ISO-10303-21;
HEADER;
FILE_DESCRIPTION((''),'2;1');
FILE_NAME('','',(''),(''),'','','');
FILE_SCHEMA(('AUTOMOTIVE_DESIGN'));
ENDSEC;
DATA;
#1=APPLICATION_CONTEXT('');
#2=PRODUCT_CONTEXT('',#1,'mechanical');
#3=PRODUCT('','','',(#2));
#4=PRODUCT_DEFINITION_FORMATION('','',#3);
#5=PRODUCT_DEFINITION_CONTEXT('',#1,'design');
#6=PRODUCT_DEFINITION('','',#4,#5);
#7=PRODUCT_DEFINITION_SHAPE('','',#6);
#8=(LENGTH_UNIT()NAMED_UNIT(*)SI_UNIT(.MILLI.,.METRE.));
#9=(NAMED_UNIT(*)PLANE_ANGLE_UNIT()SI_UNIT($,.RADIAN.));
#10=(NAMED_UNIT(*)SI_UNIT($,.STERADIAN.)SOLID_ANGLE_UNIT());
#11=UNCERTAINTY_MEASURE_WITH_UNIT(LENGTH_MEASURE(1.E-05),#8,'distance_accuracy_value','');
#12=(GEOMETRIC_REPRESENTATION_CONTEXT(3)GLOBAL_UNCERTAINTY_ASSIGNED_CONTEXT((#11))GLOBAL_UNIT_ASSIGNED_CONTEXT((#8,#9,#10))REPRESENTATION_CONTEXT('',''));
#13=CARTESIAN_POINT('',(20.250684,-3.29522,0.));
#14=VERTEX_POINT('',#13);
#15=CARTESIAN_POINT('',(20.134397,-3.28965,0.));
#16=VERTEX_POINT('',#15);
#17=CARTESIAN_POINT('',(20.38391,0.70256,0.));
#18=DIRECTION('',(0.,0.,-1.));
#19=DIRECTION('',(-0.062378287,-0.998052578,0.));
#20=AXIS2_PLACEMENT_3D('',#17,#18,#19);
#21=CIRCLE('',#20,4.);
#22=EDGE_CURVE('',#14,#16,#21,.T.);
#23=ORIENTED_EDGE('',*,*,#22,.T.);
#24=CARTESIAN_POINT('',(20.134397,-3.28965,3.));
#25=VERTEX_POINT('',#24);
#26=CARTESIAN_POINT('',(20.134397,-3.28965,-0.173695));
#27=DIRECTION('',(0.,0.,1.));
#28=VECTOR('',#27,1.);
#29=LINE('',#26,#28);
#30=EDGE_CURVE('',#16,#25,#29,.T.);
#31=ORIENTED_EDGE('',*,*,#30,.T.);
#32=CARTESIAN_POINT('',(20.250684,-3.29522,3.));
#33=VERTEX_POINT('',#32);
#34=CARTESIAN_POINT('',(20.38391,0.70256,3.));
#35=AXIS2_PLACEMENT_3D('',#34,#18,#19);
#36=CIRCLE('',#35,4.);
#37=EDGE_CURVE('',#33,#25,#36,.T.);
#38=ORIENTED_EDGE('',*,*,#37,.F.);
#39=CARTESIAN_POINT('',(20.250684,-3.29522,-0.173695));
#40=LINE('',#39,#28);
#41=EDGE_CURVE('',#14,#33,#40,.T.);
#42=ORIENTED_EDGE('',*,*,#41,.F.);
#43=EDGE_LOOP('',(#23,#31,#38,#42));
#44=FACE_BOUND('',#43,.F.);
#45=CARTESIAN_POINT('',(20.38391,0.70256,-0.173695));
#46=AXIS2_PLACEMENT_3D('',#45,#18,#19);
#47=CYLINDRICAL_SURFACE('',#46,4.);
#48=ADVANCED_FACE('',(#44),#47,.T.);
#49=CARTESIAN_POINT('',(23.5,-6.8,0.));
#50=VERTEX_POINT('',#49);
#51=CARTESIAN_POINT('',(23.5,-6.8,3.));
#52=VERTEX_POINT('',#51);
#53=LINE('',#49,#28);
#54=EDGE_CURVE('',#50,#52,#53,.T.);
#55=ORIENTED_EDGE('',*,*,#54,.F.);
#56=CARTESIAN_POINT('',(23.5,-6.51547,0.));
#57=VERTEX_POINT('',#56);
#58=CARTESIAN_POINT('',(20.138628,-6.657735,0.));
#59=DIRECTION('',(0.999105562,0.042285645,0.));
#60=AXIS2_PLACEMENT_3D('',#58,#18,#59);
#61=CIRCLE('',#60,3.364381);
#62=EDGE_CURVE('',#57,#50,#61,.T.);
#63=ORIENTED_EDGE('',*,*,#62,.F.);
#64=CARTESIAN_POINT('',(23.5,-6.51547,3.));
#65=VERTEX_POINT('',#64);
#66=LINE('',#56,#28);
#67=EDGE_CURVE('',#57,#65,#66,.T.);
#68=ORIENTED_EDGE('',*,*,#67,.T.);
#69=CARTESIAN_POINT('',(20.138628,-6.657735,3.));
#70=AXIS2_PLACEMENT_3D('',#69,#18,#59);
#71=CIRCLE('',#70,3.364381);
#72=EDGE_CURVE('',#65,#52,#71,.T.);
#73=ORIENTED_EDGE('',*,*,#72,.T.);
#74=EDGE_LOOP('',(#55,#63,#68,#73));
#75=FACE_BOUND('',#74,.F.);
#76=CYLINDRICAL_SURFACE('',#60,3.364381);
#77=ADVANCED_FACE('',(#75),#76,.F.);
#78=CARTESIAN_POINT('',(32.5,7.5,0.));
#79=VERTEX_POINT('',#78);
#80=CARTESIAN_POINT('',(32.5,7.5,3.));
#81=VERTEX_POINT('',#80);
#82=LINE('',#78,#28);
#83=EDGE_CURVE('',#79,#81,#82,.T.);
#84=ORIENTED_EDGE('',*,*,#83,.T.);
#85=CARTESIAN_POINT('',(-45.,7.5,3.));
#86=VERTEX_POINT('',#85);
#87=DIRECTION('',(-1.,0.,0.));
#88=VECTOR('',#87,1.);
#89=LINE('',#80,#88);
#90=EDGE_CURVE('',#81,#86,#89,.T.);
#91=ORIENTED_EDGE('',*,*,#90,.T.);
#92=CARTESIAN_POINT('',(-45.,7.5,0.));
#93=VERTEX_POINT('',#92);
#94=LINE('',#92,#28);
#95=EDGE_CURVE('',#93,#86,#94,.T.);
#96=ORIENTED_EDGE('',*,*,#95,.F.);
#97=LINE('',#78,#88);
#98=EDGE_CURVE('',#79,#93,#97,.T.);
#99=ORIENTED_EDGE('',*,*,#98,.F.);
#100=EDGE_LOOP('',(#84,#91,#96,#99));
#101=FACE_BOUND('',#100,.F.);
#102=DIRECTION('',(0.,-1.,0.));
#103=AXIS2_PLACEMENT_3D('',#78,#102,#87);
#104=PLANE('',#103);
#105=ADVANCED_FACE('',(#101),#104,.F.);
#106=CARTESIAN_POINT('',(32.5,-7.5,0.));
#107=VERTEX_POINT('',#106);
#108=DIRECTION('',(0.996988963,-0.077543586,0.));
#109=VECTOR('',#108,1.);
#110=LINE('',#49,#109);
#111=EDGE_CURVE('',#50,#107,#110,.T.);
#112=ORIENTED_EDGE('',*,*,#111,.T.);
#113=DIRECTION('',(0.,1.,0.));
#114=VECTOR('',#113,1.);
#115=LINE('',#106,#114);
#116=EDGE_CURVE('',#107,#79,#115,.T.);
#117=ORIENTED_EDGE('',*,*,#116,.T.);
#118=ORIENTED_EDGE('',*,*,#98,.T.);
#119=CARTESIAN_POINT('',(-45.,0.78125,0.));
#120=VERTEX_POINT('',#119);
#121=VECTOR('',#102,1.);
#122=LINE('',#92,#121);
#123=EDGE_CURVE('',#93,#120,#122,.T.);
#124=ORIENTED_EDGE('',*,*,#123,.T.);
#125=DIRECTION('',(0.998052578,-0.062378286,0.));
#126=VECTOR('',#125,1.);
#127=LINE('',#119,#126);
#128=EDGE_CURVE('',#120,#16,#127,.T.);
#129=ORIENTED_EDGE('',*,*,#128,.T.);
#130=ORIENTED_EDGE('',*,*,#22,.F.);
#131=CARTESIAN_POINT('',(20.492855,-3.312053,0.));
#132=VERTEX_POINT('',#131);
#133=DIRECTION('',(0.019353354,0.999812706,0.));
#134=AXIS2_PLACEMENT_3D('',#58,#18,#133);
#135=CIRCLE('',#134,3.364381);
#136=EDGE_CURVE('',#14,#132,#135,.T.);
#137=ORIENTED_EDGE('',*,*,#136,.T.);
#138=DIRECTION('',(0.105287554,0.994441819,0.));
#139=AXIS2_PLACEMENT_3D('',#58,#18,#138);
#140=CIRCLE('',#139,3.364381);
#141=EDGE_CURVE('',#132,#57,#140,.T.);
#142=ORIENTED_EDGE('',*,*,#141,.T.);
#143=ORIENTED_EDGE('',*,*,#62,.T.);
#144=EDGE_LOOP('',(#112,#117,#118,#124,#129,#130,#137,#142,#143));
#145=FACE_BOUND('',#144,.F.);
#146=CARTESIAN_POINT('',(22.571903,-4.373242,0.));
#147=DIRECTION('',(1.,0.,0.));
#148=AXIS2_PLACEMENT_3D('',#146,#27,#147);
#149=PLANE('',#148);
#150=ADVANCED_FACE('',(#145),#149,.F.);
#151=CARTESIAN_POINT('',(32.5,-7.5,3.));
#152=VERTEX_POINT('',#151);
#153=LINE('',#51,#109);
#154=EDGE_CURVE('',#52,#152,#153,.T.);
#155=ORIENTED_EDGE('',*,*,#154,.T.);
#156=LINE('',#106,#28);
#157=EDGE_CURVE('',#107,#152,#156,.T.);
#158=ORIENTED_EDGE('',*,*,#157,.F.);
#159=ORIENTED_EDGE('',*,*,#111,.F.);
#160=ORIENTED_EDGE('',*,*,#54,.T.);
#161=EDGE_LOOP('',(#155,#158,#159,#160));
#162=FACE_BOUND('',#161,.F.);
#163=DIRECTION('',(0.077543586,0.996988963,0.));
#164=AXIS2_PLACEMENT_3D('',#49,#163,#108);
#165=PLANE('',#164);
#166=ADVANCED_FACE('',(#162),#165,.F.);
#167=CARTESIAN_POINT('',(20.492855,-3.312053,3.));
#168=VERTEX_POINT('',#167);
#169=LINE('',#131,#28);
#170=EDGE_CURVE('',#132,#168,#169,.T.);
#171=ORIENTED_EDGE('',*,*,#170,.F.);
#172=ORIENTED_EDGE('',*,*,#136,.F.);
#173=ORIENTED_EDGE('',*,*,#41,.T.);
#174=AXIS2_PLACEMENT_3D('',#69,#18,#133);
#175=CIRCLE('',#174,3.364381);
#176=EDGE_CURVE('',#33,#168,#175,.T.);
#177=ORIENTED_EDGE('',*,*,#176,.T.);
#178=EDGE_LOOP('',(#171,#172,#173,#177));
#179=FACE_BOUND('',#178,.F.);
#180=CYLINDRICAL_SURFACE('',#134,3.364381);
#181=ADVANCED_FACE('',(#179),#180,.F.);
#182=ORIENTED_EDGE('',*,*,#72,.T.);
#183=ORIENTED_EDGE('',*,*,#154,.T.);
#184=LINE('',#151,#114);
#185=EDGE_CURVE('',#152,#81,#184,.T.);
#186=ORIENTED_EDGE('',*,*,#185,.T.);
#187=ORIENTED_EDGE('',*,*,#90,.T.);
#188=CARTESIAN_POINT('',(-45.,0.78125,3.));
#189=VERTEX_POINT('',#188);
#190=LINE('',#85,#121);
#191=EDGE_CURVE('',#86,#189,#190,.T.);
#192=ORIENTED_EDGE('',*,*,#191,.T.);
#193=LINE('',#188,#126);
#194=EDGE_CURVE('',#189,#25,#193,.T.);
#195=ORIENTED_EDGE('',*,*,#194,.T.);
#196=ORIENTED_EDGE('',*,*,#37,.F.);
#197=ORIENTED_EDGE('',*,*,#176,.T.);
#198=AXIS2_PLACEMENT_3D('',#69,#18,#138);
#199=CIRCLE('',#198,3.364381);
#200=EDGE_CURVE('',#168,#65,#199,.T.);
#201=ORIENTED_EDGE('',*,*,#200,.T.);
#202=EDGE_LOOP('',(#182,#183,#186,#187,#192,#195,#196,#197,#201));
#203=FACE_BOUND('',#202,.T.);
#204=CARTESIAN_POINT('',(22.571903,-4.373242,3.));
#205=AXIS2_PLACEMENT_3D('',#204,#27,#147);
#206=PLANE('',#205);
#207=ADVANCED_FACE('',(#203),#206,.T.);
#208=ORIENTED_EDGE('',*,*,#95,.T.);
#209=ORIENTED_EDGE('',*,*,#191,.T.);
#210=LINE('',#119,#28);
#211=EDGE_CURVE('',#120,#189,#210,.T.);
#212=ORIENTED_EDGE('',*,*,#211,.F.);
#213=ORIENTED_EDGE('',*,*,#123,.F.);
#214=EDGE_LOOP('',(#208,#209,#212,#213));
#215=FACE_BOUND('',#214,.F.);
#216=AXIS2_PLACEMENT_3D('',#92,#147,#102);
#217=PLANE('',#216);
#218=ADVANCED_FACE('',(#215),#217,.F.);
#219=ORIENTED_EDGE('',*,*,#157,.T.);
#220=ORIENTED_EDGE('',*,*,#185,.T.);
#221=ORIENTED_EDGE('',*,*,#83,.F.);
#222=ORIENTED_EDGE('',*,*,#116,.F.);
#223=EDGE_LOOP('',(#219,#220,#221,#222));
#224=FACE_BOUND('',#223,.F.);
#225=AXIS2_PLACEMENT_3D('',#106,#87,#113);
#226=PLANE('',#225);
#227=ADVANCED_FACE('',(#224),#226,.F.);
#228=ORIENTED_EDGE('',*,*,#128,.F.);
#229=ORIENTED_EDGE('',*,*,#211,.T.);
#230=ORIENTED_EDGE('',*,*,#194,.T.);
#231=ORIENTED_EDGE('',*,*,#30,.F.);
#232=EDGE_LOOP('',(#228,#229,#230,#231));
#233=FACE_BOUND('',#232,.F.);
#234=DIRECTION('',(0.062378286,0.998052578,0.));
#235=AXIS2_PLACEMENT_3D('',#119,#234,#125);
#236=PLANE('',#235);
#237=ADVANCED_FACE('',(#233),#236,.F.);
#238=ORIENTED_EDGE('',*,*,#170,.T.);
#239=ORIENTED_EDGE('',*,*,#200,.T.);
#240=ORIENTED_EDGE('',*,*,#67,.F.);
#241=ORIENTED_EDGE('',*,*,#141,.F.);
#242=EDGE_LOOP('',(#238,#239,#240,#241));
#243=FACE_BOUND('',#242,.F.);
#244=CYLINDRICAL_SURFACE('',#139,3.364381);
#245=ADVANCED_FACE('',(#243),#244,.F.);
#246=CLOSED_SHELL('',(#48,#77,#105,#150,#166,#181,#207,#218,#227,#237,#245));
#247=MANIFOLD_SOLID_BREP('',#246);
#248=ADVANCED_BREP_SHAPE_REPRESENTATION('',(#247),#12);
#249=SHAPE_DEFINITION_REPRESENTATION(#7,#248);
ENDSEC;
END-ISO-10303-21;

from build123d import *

# Parameters (mm, degrees)
F2_DEPTH    = 3
F3_T1_DEPTH = 3.3473896723


# Not quite as in the source:
# - a fillet or chamfer that OpenCascade refuses, or shapes differently, is made with other operations: its cross-section is extruded or revolved along the edge and cut away or added


with BuildPart() as f2:
    # F1 (on face) → F2 (new body)
    with BuildSketch(Plane.XY):
        with BuildLine():
            Line((23.5, -3.5), (20.4928553643, -3.3120534603))
            ThreePointArc((20.4928553643, -3.3120534603), (22.5915627309, -4.3550902955), (23.5, -6.5154699331))
            Line((23.5, -6.5154699331), (23.5, -3.5))
        make_face()
        with BuildLine():
            Line((-32.5, 7.5), (-32.5, 0))
            Line((-32.5, 0), (20.2037399466, -3.2939837467))
            ThreePointArc((20.2037399466, -3.2939837467), (20.3484922252, -3.2999054879), (20.4928553643, -3.3120534603))
            Line((20.4928553643, -3.3120534603), (23.5, -3.5))
            Line((23.5, -3.5), (23.5, -6.5154699331))
            ThreePointArc((23.5, -6.5154699331), (23.5030092301, -6.6577349666), (23.5, -6.8))
            Line((23.5, -6.8), (32.5, -7.5))
            Line((32.5, -7.5), (32.5, 7.5))
            Line((32.5, 7.5), (-32.5, 7.5))
        make_face()
        Polygon((-45, 0.78125), (-32.5, 0), (-32.5, 7.5), (-45, 7.5), align=None)
    extrude(amount=F2_DEPTH)

    # F3: fillet of radius 4 on 1 edges, made by hand

    # F3_s2 → F3_t1 (cut)
    with BuildSketch(Plane.XY.offset(-0.1736948361)):
        with BuildLine():
            ThreePointArc((20.134397315, -3.2896498322), (20.1925204005, -3.2928581253), (20.2506840199, -3.2952202421))
            ThreePointArc((20.2506840199, -3.2952202421), (20.2272141407, -3.2945200871), (20.2037399466, -3.2939837467))
            Line((20.2037399466, -3.2939837467), (20.134397315, -3.2896498322))
        make_face()
    extrude(amount=F3_T1_DEPTH, mode=Mode.SUBTRACT)


solid = f2.part
